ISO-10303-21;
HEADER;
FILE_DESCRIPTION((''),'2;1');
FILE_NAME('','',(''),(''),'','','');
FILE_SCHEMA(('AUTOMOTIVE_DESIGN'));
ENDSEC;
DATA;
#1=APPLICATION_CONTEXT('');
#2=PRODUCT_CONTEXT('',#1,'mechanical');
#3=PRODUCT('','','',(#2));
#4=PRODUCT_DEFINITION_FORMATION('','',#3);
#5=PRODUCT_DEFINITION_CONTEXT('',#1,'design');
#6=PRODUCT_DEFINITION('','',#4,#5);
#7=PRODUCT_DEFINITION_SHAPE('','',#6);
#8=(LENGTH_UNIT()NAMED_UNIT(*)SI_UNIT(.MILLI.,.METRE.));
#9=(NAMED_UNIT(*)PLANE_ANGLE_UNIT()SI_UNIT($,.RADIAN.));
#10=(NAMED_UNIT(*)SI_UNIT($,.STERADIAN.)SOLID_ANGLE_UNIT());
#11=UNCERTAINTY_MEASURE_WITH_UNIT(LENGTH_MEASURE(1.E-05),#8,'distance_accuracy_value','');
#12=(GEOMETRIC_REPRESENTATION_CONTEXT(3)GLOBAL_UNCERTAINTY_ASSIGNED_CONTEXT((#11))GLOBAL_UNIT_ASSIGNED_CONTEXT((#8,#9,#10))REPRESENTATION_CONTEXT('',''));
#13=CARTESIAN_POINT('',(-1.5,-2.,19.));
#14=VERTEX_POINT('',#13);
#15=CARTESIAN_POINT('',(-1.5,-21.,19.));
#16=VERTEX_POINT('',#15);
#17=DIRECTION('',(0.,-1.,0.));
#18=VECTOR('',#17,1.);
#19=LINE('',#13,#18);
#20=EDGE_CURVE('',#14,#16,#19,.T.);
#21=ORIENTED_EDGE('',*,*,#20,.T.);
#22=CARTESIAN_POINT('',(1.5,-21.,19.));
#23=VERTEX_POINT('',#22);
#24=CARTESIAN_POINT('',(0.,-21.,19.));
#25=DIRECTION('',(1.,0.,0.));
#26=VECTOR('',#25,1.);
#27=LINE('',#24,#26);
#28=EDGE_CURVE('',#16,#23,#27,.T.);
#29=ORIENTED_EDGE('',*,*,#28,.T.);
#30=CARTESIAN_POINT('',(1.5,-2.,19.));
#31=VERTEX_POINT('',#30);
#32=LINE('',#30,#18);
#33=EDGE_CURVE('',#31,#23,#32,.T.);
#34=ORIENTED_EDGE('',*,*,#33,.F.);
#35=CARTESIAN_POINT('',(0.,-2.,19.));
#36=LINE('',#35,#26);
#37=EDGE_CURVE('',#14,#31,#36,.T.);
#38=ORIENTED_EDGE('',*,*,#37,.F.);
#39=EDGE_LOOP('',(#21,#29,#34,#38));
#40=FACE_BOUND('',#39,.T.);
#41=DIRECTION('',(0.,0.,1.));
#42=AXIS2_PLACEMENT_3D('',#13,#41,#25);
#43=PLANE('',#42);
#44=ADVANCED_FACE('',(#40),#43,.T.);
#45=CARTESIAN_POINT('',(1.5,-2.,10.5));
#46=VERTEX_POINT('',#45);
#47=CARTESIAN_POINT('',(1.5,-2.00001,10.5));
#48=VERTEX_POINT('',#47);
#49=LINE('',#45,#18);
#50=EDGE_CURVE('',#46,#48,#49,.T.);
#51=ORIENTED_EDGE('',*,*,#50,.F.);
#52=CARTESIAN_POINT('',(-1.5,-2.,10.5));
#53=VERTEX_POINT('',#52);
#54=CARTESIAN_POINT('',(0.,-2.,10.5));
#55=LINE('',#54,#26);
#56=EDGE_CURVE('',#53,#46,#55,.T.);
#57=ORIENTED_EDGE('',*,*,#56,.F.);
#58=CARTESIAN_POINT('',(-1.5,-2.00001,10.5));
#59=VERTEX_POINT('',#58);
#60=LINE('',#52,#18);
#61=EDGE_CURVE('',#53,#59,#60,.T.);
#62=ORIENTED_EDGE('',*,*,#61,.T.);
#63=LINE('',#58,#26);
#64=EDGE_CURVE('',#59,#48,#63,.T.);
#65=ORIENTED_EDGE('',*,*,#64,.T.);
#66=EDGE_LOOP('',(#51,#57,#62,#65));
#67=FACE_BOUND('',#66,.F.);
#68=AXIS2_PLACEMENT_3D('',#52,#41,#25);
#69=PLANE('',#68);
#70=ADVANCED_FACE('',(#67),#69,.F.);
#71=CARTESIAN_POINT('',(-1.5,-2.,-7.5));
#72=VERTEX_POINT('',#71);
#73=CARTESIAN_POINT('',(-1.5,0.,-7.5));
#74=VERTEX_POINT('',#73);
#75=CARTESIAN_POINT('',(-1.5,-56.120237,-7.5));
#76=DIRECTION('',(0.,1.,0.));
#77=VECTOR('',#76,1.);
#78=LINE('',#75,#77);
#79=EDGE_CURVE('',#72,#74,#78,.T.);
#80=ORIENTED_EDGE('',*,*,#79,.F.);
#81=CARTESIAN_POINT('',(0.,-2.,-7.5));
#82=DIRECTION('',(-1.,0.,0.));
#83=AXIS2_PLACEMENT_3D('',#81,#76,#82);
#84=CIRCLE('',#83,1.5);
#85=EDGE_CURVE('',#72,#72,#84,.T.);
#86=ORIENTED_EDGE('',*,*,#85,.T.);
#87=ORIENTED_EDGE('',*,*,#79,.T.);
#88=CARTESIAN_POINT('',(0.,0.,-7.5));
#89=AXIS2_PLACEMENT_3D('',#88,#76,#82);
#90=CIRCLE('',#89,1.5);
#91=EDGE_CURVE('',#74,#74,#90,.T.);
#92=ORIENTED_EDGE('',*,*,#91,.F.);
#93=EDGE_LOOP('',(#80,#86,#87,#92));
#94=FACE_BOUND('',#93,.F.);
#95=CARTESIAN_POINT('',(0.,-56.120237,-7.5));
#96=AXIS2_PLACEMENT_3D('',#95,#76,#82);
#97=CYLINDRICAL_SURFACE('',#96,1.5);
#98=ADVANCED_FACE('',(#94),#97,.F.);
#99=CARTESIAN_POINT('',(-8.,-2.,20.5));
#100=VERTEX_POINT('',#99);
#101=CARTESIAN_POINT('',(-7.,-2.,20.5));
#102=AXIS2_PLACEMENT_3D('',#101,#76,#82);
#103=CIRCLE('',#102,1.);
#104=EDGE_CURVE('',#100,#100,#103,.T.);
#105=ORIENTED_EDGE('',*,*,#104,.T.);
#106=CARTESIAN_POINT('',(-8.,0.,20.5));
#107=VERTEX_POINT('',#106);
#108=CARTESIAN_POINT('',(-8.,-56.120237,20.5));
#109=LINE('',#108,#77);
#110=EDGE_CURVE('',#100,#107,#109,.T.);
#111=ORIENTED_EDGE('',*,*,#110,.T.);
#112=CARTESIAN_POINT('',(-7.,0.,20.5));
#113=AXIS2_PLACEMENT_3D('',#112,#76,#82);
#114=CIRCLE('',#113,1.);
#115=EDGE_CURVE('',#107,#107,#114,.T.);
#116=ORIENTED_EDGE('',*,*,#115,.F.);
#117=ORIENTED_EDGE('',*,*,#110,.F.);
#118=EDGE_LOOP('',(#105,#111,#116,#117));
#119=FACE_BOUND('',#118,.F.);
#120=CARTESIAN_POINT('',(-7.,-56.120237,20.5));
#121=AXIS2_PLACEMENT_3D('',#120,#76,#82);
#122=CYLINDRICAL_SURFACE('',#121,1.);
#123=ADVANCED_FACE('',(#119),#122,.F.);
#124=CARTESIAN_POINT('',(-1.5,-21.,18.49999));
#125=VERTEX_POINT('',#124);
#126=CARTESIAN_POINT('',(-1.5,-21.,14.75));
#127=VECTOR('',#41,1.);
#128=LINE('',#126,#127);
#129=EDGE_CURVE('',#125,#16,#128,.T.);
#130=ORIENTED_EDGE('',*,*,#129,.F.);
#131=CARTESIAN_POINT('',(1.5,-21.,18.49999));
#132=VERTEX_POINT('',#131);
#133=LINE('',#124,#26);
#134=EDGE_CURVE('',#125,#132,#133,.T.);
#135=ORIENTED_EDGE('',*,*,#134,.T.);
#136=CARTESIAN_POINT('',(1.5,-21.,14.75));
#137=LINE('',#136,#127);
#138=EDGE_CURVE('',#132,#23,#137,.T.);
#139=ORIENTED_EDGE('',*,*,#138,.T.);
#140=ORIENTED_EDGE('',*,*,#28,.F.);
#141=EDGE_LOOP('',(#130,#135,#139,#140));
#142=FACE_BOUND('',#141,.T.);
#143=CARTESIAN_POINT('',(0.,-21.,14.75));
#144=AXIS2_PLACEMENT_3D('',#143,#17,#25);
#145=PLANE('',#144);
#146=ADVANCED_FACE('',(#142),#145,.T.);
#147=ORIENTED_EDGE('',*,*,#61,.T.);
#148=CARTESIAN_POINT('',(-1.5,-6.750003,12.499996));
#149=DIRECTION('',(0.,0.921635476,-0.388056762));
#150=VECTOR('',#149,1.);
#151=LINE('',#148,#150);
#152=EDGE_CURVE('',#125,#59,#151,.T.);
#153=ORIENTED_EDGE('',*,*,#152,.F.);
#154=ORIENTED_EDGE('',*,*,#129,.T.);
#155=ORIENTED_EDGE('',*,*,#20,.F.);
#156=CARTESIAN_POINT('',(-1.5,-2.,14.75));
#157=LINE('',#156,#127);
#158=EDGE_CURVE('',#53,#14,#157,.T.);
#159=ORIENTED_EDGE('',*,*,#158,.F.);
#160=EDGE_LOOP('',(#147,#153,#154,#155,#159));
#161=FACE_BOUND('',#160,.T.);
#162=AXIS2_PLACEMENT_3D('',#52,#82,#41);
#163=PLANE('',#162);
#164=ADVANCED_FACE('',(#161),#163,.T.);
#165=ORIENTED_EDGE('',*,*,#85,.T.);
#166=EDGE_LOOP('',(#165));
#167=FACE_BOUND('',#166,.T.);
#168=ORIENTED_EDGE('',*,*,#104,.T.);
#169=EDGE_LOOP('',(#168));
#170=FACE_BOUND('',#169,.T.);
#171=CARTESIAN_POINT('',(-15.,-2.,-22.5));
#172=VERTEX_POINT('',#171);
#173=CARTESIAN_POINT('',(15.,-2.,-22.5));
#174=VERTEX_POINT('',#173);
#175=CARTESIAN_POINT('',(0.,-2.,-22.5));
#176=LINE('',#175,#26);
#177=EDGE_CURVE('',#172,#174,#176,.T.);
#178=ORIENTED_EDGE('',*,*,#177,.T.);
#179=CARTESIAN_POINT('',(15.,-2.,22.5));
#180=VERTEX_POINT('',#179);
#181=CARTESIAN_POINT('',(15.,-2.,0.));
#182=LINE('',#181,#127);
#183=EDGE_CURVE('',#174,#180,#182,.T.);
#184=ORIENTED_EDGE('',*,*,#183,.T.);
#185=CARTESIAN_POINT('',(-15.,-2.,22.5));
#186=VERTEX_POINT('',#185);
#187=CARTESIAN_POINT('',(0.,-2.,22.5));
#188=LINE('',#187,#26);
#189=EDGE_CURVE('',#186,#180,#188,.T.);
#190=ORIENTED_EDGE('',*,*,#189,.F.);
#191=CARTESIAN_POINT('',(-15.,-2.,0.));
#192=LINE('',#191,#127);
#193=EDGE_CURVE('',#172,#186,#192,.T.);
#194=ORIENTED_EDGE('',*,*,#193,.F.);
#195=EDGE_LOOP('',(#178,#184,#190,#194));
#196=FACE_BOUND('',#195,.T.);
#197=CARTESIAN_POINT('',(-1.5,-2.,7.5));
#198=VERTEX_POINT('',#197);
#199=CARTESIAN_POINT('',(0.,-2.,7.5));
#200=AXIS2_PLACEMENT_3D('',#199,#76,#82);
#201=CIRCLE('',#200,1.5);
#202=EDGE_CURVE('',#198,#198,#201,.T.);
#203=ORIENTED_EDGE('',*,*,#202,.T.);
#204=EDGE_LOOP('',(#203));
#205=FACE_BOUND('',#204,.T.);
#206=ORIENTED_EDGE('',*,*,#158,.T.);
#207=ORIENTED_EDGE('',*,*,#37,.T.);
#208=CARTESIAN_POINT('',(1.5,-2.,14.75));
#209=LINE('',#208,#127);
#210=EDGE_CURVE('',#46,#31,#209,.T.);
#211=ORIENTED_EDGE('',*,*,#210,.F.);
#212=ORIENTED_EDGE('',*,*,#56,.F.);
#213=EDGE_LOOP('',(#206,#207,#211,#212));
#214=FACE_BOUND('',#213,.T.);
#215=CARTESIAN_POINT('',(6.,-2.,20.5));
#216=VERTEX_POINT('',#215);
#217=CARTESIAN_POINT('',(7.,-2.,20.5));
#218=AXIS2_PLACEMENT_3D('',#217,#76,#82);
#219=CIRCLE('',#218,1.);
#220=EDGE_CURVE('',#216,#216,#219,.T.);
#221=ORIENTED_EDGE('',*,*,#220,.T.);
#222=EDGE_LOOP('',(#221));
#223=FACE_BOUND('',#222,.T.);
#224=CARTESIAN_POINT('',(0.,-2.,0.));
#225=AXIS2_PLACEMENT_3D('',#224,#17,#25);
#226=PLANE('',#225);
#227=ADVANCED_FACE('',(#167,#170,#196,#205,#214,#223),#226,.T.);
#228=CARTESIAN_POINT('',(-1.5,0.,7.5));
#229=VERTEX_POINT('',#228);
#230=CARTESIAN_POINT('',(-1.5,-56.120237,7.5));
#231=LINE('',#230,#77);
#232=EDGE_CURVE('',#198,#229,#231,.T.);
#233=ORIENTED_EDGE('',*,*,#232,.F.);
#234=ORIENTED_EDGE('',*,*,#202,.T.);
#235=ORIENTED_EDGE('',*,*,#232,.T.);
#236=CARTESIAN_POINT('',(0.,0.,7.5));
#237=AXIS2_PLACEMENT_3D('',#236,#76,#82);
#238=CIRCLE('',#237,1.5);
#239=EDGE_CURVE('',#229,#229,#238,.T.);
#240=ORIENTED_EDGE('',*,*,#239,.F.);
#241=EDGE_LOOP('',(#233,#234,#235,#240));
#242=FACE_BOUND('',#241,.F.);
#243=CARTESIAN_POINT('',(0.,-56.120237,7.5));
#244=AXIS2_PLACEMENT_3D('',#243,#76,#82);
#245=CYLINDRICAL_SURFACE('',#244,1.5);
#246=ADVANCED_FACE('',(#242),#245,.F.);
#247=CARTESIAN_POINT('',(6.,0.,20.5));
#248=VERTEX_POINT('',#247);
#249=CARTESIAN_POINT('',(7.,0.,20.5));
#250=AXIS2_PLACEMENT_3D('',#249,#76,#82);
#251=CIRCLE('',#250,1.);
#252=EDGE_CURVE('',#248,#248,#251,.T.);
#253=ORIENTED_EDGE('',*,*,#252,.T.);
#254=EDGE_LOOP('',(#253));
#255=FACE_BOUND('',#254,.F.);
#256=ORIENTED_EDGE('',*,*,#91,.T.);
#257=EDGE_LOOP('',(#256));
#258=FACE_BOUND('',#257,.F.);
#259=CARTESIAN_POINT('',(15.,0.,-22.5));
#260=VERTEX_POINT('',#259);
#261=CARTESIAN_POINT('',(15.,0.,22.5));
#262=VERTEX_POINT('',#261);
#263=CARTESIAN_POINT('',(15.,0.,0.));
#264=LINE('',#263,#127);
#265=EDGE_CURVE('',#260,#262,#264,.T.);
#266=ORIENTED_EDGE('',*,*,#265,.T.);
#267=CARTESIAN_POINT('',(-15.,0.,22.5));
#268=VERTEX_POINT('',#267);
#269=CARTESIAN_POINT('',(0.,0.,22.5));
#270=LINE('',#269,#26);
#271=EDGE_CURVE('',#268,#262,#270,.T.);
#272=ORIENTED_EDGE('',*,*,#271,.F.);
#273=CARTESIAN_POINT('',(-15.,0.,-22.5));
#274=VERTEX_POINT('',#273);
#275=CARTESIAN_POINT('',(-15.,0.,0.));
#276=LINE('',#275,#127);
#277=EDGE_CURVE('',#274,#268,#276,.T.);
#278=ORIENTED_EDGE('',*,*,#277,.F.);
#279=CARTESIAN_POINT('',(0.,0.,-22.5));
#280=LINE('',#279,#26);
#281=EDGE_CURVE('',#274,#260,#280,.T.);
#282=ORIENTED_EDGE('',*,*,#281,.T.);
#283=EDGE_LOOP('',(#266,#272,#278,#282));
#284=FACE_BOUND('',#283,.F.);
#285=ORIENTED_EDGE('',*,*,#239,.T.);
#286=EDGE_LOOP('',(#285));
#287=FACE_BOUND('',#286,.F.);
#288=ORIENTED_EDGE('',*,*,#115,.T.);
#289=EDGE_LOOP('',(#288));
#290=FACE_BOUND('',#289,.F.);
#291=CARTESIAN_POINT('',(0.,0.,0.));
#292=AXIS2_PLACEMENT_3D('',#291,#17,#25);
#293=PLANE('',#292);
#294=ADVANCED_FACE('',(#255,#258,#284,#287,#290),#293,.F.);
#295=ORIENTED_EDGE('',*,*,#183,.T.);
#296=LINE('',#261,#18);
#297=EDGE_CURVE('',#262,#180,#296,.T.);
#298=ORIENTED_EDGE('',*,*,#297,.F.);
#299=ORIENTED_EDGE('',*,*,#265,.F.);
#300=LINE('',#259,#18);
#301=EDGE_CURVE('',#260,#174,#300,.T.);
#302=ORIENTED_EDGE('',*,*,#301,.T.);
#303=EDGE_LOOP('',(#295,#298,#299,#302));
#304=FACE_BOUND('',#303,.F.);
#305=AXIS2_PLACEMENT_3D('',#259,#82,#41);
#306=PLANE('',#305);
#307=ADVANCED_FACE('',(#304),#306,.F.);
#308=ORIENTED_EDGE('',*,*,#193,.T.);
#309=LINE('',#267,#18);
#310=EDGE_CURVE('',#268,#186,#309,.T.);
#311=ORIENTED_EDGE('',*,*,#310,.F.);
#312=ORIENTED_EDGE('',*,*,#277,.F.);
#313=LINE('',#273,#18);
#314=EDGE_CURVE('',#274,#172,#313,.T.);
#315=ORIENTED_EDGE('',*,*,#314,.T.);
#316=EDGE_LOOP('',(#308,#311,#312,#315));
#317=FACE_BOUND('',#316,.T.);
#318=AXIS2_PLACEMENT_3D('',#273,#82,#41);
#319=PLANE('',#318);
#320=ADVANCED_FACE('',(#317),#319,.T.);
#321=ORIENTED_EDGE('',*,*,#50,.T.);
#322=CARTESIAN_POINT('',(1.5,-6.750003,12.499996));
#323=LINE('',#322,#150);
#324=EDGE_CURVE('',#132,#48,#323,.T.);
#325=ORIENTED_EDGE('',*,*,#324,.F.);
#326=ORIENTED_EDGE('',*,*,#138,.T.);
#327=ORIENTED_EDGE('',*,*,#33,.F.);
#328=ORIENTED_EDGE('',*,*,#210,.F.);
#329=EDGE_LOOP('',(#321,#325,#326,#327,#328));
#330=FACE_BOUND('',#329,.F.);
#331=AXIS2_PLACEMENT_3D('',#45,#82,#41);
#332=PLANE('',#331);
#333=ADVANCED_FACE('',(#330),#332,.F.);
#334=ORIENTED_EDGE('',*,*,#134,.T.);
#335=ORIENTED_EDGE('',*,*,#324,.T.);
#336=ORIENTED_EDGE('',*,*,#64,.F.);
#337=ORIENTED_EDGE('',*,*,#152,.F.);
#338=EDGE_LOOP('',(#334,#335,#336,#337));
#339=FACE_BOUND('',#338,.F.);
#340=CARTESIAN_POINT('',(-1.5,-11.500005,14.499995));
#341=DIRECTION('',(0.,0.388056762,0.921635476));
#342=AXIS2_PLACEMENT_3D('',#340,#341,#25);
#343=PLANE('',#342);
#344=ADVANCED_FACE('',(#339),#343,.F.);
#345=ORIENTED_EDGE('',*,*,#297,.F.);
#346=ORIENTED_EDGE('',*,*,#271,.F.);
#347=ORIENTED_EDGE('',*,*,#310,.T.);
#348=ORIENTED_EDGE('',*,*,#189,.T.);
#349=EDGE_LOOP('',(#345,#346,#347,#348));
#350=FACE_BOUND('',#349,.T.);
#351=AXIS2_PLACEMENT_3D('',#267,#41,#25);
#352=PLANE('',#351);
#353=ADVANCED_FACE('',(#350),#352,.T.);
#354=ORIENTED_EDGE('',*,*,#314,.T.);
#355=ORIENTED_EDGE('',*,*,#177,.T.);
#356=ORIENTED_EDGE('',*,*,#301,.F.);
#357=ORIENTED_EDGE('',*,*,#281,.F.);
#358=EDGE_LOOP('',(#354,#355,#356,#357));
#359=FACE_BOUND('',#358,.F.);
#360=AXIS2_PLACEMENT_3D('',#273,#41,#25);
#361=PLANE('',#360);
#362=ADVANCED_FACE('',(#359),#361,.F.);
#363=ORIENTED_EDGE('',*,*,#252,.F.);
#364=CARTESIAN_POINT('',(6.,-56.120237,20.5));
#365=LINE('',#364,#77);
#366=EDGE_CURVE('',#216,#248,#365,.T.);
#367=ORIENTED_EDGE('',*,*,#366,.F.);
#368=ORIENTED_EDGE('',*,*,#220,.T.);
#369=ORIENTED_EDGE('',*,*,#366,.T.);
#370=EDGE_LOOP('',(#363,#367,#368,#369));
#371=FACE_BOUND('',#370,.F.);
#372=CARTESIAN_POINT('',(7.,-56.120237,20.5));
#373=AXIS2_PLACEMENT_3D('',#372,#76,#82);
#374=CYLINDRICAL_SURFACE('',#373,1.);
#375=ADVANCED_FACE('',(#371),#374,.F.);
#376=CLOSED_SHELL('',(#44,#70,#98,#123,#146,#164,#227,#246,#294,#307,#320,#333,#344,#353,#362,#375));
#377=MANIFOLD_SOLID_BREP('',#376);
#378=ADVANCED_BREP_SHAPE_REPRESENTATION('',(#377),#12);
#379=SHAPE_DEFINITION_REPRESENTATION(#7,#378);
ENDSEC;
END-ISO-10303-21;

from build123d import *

# Parameters (mm, degrees)
F0_W     = 30
F0_H     = 45
F1_DEPTH = 2
F3_D     = 2
F4_D     = 3
F2_W     = 3
F2_H     = 8.5
F5_DEPTH = 19
F6_SIZE2 = 18.99999
F6_SIZE  = 7.99999


# Not quite as in the source:
# - a fillet or chamfer is up to 0.001 mm smaller than in the source, because OpenCascade refuses the exact size


with BuildPart() as f1:
    # F0 (on Front) → F1 (new body)
    with BuildSketch(Plane.XZ):
        Rectangle(F0_W, F0_H)
    extrude(amount=F1_DEPTH)

    # F3 (through all)
    with Locations(Plane.XZ.offset(2)):
        with Locations((-7, 20.5), (7, 20.5)):
            Hole(F3_D / 2)

    # F4 (through all)
    with Locations(Plane.XZ.offset(2)):
        with Locations((0, 7.5), (0, -7.5)):
            Hole(F4_D / 2)

    # F2 (on face) → F5 (join)
    with BuildSketch(Plane.XZ.offset(2)):
        with Locations((0, 14.75)):
            Rectangle(F2_W, F2_H)
    extrude(amount=F5_DEPTH)

    # F6 (size 8 and 19 in the source; OpenCascade refuses exactly that, so slightly less here)
    f6_edges = [f1.edges().sort_by_distance(p)[0] for p in [
        (0, -21, 10.5),
    ]]
    f6_side = f1.faces().sort_by_distance((0, -21, 14.75))[0]
    chamfer(f6_edges, length=F6_SIZE, length2=F6_SIZE2, reference=f6_side)


solid = f1.part
